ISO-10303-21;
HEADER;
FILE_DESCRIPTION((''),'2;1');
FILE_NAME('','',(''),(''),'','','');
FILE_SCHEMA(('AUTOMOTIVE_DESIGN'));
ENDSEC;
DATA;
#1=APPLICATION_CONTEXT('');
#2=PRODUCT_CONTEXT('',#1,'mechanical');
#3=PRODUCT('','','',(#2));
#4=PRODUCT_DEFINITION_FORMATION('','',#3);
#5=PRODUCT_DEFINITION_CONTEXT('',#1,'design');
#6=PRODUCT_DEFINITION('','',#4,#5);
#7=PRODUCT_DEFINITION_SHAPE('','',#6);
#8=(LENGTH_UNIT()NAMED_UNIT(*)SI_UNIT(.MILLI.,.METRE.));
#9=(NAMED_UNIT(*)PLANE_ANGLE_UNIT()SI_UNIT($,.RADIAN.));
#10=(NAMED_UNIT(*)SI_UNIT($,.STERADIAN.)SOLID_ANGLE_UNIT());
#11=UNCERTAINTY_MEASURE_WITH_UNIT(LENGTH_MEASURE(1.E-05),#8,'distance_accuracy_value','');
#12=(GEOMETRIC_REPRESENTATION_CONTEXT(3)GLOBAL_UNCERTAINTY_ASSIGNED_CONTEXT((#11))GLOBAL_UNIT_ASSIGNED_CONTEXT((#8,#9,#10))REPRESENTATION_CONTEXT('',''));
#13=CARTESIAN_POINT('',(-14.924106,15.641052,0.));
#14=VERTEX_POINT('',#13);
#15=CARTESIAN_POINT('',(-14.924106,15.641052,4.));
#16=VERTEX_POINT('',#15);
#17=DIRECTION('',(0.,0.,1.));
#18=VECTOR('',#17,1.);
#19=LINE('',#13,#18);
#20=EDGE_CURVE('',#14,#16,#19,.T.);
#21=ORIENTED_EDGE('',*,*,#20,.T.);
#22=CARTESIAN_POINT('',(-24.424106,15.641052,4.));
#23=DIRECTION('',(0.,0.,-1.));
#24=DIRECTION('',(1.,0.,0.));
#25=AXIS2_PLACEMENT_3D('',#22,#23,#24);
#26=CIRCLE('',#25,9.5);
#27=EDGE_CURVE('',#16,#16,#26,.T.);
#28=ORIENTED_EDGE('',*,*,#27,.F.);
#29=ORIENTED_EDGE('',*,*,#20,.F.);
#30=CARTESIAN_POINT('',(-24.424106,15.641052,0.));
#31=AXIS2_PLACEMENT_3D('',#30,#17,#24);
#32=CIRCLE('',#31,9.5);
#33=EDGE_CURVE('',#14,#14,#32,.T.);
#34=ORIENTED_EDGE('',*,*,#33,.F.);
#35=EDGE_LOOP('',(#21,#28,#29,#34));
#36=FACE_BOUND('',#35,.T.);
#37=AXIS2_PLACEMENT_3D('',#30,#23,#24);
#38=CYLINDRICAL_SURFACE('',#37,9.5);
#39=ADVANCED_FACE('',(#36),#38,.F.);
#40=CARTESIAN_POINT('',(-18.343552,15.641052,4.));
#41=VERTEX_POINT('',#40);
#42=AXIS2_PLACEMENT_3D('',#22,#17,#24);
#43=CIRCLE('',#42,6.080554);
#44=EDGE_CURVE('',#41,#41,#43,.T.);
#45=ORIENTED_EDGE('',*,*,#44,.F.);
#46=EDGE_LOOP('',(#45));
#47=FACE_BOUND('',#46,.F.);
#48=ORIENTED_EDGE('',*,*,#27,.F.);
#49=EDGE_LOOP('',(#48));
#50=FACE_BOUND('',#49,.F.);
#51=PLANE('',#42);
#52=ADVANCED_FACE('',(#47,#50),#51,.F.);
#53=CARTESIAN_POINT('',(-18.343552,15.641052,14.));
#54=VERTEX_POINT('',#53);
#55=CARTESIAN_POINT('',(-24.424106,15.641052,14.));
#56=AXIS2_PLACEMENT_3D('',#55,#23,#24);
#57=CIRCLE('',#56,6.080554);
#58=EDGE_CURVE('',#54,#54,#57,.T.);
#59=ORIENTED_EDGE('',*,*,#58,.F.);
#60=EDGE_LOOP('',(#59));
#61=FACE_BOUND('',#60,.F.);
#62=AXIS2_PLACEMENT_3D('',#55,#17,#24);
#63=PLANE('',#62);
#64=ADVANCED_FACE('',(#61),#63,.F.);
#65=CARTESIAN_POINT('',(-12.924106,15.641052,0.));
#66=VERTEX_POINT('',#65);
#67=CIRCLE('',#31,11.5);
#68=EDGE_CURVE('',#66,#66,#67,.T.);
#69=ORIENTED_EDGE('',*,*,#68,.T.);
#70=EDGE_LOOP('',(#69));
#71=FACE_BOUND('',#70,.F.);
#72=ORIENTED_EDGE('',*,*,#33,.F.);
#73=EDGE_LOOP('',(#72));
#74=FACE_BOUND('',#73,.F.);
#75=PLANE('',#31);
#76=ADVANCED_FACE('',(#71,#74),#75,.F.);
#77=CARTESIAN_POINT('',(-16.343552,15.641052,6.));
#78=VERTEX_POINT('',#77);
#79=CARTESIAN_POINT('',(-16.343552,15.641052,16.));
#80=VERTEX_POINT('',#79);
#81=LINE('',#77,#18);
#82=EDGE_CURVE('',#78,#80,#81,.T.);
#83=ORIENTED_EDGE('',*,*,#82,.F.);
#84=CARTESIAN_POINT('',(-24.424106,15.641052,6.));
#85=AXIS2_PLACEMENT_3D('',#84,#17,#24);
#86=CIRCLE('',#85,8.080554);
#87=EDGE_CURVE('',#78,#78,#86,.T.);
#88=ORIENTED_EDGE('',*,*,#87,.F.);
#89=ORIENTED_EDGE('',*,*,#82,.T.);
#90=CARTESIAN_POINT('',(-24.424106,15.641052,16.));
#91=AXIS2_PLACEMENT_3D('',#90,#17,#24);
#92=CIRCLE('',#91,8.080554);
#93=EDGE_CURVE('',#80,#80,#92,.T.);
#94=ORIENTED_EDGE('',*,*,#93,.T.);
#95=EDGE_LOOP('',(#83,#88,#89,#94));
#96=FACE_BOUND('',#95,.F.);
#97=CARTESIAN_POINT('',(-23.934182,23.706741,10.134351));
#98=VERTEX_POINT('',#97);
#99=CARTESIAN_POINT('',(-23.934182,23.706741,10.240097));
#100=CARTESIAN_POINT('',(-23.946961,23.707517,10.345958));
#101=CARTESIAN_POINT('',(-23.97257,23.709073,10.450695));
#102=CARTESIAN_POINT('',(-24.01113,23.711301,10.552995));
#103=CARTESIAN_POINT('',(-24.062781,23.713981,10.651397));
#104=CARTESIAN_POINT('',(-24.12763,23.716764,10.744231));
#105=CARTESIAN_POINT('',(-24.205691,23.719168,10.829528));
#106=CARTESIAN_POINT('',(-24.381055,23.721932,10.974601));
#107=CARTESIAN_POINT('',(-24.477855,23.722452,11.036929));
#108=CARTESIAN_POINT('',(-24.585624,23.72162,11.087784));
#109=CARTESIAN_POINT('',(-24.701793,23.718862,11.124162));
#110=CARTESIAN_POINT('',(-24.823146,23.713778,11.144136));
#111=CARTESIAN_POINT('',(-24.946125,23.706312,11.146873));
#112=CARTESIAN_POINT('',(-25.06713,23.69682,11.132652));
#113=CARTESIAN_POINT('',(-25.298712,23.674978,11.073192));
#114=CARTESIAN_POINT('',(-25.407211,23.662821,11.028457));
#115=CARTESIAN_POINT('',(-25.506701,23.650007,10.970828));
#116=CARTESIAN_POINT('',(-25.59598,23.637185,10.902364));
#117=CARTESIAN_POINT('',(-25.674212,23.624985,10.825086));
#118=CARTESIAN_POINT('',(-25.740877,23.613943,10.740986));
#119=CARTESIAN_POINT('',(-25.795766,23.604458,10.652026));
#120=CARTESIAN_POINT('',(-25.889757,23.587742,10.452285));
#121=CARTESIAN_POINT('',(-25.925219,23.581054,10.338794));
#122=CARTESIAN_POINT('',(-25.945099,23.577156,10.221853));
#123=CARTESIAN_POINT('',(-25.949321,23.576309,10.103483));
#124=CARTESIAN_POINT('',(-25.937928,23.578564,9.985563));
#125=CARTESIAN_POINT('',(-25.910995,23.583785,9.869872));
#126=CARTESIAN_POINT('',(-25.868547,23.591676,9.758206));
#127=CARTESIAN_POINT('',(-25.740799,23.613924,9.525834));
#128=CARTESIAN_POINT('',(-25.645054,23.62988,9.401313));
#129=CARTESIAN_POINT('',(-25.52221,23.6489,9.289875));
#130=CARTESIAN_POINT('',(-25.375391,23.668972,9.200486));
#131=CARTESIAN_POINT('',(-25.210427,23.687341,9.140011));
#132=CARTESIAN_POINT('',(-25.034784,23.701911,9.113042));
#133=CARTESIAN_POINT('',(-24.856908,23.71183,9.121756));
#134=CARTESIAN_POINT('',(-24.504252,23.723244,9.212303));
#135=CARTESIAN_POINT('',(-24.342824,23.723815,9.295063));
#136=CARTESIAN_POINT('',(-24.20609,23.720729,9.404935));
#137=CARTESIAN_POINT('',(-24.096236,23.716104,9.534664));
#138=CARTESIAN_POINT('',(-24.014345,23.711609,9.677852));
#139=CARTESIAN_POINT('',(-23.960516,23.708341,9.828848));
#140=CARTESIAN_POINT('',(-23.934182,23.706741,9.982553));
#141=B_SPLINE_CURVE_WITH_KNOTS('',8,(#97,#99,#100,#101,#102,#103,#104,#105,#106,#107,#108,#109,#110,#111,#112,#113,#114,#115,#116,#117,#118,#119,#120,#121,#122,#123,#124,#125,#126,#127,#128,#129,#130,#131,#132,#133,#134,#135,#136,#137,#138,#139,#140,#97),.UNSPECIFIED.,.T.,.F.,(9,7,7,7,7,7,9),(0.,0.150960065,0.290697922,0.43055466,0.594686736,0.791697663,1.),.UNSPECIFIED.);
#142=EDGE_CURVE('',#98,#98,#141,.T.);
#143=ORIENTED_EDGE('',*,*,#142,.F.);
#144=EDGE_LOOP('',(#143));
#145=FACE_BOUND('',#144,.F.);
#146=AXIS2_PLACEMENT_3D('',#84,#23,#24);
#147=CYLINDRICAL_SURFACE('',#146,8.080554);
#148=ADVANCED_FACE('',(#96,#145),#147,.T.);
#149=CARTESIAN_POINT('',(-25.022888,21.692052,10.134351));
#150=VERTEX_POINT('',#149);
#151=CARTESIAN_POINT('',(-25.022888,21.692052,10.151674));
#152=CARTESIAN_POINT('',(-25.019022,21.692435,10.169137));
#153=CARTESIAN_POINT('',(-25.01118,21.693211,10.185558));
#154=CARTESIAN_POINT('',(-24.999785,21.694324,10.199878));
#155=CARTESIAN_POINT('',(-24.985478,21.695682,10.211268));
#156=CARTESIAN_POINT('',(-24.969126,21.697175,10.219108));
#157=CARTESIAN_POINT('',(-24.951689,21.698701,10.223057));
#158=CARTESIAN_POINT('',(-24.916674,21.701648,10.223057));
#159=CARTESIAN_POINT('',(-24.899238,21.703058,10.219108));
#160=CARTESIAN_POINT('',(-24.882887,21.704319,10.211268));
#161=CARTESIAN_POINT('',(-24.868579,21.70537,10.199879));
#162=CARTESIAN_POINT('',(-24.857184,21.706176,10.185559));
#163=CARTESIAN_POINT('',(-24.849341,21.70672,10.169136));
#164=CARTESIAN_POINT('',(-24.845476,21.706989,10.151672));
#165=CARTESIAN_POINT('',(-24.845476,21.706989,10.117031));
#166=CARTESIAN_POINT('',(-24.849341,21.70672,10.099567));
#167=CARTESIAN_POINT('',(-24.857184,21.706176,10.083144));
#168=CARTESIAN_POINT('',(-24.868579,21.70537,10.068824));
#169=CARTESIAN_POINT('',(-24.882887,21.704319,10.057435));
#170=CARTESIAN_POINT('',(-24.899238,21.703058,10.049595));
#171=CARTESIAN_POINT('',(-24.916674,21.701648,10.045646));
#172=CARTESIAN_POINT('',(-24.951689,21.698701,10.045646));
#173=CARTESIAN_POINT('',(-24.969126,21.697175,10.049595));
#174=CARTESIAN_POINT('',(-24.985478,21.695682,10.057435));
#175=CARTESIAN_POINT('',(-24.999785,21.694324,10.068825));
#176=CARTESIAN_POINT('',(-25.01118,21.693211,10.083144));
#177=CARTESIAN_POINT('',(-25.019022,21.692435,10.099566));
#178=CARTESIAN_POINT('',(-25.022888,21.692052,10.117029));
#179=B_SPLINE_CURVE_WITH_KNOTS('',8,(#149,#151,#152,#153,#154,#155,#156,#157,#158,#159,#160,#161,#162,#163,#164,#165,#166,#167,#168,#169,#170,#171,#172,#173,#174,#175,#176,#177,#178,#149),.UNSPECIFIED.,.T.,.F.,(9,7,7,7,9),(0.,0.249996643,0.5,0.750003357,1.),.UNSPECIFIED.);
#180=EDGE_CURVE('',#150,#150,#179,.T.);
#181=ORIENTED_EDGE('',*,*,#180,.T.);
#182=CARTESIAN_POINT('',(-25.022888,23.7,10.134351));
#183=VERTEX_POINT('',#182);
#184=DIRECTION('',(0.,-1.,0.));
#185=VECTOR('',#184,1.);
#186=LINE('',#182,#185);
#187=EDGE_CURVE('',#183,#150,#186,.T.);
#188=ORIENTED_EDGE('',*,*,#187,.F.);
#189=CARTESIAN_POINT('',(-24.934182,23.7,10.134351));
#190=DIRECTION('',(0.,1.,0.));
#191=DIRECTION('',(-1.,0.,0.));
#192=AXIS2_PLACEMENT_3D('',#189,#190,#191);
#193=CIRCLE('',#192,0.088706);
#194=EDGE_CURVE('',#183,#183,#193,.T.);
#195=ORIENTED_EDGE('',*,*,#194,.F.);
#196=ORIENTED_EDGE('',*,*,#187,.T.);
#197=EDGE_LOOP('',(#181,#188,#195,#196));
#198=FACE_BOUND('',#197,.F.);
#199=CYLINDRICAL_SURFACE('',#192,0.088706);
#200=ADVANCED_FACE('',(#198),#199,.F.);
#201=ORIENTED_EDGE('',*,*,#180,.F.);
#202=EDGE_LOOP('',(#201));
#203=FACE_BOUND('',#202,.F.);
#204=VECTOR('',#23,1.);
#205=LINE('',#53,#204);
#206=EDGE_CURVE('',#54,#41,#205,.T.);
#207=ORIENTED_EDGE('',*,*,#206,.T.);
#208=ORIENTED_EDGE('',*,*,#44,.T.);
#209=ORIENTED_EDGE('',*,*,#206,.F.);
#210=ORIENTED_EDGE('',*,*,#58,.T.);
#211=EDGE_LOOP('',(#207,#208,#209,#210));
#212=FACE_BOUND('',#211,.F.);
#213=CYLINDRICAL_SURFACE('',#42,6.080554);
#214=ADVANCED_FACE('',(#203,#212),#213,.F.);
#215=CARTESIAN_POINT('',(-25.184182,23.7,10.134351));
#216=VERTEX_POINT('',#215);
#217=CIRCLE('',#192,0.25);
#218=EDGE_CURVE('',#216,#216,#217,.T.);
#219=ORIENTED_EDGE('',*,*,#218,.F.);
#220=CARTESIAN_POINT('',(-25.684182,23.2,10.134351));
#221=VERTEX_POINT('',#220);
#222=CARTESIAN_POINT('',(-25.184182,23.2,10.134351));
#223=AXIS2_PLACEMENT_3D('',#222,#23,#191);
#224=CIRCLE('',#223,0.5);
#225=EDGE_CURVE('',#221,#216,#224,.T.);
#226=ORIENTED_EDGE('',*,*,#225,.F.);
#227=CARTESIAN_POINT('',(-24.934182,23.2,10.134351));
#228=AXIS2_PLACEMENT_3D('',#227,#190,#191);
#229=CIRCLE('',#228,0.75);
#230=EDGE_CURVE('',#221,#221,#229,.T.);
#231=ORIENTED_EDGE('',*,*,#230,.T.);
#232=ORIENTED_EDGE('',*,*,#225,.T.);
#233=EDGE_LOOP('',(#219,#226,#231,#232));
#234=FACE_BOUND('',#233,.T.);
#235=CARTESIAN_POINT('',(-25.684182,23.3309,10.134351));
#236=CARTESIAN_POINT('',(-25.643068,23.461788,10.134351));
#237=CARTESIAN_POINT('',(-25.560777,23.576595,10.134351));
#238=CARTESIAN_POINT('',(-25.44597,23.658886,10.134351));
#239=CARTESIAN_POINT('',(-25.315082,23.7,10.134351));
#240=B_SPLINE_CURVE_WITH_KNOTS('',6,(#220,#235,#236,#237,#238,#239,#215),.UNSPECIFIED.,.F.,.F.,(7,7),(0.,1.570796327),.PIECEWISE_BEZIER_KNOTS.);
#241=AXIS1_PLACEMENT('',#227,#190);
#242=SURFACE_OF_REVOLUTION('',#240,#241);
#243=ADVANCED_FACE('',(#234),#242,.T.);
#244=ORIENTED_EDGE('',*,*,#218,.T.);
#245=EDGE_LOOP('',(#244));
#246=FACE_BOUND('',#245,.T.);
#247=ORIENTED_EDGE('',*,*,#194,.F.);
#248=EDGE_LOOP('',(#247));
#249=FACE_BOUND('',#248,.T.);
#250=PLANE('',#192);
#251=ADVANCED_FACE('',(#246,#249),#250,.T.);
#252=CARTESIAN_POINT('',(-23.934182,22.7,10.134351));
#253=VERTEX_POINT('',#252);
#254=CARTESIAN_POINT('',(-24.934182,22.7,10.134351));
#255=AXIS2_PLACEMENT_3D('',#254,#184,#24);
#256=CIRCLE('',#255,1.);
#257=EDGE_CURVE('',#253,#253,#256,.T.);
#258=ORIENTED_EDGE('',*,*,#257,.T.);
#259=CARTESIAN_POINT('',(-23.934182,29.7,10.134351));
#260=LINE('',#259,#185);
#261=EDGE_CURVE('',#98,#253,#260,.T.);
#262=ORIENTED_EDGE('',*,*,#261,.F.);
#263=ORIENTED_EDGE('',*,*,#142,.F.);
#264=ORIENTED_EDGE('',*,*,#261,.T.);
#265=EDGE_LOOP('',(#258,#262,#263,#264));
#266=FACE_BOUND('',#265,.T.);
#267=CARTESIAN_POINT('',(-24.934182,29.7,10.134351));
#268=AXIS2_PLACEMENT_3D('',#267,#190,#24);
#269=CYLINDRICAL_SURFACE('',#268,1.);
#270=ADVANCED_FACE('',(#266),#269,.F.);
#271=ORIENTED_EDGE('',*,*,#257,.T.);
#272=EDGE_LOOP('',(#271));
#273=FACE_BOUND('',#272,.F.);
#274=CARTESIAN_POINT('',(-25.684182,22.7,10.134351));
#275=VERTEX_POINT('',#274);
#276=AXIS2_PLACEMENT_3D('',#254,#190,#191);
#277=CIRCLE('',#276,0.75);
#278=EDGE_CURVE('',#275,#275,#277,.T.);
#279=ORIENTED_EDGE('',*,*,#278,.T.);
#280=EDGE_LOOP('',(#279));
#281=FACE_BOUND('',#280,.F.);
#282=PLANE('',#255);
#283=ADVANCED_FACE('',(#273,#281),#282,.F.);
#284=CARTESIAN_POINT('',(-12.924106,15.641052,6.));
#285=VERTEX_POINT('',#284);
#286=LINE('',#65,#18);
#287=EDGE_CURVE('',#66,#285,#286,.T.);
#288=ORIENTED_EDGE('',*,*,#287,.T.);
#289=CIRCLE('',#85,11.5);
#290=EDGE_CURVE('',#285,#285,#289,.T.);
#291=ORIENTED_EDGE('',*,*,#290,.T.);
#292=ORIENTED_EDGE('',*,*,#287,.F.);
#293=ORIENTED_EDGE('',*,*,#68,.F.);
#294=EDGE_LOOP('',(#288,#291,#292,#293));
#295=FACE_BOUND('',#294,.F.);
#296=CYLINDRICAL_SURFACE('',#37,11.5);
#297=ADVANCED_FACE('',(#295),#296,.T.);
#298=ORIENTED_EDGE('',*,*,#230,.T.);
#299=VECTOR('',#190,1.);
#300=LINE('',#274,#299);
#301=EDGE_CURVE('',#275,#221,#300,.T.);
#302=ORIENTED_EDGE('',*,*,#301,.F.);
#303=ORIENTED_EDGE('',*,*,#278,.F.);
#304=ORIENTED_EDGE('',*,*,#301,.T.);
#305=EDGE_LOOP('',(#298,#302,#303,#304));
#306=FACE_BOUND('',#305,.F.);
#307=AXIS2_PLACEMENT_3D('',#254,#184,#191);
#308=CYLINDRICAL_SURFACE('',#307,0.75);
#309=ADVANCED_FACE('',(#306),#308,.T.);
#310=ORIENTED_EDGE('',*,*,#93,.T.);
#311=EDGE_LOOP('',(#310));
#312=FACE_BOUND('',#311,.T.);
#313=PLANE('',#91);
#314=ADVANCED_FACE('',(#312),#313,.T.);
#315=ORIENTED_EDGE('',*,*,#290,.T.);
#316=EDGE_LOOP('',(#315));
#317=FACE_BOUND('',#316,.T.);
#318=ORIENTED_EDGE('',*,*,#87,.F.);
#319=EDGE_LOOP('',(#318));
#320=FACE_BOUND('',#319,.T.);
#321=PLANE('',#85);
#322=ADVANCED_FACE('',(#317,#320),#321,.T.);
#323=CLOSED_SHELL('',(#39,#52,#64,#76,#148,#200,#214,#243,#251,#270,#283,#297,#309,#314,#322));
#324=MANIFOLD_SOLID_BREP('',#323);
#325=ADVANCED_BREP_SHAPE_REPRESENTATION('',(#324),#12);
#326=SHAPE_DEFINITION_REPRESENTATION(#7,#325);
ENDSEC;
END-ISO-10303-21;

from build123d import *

# Parameters (mm, degrees)
F0_R      = 11.5
F1_DEPTH  = 6
F2_T      = -2
F3_R      = 8.0805542871
F4_DEPTH  = 10
F5_T      = 2
F7_R      = 1
F8_DEPTH  = 7
F9_R      = 0.75
F10_DEPTH = 1
F11_R     = 0.5
F12_R     = 0.0887059055
F13_DEPTH = 7


# Not quite as in the source:
# - a shell that OpenCascade refuses in one call is made with other operations: the cavity is built on its own and cut out


with BuildPart() as f1:
    # F0 (on Top) → F1 (new body)
    with BuildSketch(Plane.XY):
        with Locations((-24.4241058826, 15.6410522759)):
            Circle(F0_R)
    extrude(amount=F1_DEPTH)

    # F2
    f2_openings = [f1.faces().sort_by_distance(p)[0] for p in [
        (-24.424106, 15.641052, 0),
    ]]
    offset(amount=F2_T, openings=f2_openings)

    # F3 (on face) → F4 (join)
    with BuildSketch(Plane.XY.offset(6)):
        with Locations((-24.4241058826, 15.6410522759)):
            Circle(F3_R)
    extrude(amount=F4_DEPTH)

    # F5: shell of thickness 2, made by hand


with BuildPart() as f5_core1:
    # F5_t2: copy of F1
    add(f1.part)

    # the walls: a layer under each face that stays
    f5_faces = [f5_core1.faces().sort_by_distance(p)[0] for p in [
        (-35.9241058826, 15.6410522759, 3),
        (-32.0907725493, 7.9743856092, 0),
        (-32.0907725493, 7.9743856092, 6),
        (-33.9241058826, 15.6410522759, 2),
        (-32.5046601698, 15.6410522759, 11),
        (-24.4241058826, 15.6410522759, 16),
    ]]
    thicken(f5_faces, amount=-F5_T, mode=Mode.SUBTRACT)

    # F5_s3 → F5_t4 (revolve, cut)
    with BuildSketch(Plane.XZ.offset(-15.6410522759)):
        Polygon((-16.3235515955, 6.02), (-16.3435515955, 4), (-18.3435515955, 4), (-18.3435515955, 6), align=None)
    revolve(axis=Axis((-24.4241058826, 15.6410522759, 6), (0, 0, 1)), mode=Mode.SUBTRACT)


with BuildPart() as f1_1:
    add(f1.part)

    # what is left inside the walls is the cavity
    f5_cavity = [f5_core1.part.solids().sort_by_distance(p)[0] for p in [
        (-30.48466, 15.641052, 11.333333),
    ]]
    add(f5_cavity, mode=Mode.SUBTRACT)

    # F7 (on offset) → F8 (cut)
    with BuildSketch(Plane.XZ.offset(-29.7)):
        with Locations((-24.9341819435, 10.1343514398)):
            Circle(F7_R)
    extrude(amount=F8_DEPTH, mode=Mode.SUBTRACT)

    # F9 (on face) → F10 (join)
    with BuildSketch(Plane(origin=(0, 22.7, 0), x_dir=(-1, 0, 0), z_dir=(0, 1, 0))):
        with Locations((24.9341819435, 10.1343514398)):
            Circle(F9_R)
    extrude(amount=F10_DEPTH)

    # F11
    f11_edges = [f1_1.edges().sort_by_distance(p)[0] for p in [
        (-24.184182, 23.7, 10.134351),
    ]]
    fillet(f11_edges, radius=F11_R)

    # F12 (on face) → F13 (cut)
    with BuildSketch(Plane(origin=(0, 23.7, 0), x_dir=(-1, 0, 0), z_dir=(0, 1, 0))):
        with Locations((24.9341819435, 10.1343514398)):
            Circle(F12_R)
    extrude(amount=-F13_DEPTH, mode=Mode.SUBTRACT)


solid = f1_1.part
